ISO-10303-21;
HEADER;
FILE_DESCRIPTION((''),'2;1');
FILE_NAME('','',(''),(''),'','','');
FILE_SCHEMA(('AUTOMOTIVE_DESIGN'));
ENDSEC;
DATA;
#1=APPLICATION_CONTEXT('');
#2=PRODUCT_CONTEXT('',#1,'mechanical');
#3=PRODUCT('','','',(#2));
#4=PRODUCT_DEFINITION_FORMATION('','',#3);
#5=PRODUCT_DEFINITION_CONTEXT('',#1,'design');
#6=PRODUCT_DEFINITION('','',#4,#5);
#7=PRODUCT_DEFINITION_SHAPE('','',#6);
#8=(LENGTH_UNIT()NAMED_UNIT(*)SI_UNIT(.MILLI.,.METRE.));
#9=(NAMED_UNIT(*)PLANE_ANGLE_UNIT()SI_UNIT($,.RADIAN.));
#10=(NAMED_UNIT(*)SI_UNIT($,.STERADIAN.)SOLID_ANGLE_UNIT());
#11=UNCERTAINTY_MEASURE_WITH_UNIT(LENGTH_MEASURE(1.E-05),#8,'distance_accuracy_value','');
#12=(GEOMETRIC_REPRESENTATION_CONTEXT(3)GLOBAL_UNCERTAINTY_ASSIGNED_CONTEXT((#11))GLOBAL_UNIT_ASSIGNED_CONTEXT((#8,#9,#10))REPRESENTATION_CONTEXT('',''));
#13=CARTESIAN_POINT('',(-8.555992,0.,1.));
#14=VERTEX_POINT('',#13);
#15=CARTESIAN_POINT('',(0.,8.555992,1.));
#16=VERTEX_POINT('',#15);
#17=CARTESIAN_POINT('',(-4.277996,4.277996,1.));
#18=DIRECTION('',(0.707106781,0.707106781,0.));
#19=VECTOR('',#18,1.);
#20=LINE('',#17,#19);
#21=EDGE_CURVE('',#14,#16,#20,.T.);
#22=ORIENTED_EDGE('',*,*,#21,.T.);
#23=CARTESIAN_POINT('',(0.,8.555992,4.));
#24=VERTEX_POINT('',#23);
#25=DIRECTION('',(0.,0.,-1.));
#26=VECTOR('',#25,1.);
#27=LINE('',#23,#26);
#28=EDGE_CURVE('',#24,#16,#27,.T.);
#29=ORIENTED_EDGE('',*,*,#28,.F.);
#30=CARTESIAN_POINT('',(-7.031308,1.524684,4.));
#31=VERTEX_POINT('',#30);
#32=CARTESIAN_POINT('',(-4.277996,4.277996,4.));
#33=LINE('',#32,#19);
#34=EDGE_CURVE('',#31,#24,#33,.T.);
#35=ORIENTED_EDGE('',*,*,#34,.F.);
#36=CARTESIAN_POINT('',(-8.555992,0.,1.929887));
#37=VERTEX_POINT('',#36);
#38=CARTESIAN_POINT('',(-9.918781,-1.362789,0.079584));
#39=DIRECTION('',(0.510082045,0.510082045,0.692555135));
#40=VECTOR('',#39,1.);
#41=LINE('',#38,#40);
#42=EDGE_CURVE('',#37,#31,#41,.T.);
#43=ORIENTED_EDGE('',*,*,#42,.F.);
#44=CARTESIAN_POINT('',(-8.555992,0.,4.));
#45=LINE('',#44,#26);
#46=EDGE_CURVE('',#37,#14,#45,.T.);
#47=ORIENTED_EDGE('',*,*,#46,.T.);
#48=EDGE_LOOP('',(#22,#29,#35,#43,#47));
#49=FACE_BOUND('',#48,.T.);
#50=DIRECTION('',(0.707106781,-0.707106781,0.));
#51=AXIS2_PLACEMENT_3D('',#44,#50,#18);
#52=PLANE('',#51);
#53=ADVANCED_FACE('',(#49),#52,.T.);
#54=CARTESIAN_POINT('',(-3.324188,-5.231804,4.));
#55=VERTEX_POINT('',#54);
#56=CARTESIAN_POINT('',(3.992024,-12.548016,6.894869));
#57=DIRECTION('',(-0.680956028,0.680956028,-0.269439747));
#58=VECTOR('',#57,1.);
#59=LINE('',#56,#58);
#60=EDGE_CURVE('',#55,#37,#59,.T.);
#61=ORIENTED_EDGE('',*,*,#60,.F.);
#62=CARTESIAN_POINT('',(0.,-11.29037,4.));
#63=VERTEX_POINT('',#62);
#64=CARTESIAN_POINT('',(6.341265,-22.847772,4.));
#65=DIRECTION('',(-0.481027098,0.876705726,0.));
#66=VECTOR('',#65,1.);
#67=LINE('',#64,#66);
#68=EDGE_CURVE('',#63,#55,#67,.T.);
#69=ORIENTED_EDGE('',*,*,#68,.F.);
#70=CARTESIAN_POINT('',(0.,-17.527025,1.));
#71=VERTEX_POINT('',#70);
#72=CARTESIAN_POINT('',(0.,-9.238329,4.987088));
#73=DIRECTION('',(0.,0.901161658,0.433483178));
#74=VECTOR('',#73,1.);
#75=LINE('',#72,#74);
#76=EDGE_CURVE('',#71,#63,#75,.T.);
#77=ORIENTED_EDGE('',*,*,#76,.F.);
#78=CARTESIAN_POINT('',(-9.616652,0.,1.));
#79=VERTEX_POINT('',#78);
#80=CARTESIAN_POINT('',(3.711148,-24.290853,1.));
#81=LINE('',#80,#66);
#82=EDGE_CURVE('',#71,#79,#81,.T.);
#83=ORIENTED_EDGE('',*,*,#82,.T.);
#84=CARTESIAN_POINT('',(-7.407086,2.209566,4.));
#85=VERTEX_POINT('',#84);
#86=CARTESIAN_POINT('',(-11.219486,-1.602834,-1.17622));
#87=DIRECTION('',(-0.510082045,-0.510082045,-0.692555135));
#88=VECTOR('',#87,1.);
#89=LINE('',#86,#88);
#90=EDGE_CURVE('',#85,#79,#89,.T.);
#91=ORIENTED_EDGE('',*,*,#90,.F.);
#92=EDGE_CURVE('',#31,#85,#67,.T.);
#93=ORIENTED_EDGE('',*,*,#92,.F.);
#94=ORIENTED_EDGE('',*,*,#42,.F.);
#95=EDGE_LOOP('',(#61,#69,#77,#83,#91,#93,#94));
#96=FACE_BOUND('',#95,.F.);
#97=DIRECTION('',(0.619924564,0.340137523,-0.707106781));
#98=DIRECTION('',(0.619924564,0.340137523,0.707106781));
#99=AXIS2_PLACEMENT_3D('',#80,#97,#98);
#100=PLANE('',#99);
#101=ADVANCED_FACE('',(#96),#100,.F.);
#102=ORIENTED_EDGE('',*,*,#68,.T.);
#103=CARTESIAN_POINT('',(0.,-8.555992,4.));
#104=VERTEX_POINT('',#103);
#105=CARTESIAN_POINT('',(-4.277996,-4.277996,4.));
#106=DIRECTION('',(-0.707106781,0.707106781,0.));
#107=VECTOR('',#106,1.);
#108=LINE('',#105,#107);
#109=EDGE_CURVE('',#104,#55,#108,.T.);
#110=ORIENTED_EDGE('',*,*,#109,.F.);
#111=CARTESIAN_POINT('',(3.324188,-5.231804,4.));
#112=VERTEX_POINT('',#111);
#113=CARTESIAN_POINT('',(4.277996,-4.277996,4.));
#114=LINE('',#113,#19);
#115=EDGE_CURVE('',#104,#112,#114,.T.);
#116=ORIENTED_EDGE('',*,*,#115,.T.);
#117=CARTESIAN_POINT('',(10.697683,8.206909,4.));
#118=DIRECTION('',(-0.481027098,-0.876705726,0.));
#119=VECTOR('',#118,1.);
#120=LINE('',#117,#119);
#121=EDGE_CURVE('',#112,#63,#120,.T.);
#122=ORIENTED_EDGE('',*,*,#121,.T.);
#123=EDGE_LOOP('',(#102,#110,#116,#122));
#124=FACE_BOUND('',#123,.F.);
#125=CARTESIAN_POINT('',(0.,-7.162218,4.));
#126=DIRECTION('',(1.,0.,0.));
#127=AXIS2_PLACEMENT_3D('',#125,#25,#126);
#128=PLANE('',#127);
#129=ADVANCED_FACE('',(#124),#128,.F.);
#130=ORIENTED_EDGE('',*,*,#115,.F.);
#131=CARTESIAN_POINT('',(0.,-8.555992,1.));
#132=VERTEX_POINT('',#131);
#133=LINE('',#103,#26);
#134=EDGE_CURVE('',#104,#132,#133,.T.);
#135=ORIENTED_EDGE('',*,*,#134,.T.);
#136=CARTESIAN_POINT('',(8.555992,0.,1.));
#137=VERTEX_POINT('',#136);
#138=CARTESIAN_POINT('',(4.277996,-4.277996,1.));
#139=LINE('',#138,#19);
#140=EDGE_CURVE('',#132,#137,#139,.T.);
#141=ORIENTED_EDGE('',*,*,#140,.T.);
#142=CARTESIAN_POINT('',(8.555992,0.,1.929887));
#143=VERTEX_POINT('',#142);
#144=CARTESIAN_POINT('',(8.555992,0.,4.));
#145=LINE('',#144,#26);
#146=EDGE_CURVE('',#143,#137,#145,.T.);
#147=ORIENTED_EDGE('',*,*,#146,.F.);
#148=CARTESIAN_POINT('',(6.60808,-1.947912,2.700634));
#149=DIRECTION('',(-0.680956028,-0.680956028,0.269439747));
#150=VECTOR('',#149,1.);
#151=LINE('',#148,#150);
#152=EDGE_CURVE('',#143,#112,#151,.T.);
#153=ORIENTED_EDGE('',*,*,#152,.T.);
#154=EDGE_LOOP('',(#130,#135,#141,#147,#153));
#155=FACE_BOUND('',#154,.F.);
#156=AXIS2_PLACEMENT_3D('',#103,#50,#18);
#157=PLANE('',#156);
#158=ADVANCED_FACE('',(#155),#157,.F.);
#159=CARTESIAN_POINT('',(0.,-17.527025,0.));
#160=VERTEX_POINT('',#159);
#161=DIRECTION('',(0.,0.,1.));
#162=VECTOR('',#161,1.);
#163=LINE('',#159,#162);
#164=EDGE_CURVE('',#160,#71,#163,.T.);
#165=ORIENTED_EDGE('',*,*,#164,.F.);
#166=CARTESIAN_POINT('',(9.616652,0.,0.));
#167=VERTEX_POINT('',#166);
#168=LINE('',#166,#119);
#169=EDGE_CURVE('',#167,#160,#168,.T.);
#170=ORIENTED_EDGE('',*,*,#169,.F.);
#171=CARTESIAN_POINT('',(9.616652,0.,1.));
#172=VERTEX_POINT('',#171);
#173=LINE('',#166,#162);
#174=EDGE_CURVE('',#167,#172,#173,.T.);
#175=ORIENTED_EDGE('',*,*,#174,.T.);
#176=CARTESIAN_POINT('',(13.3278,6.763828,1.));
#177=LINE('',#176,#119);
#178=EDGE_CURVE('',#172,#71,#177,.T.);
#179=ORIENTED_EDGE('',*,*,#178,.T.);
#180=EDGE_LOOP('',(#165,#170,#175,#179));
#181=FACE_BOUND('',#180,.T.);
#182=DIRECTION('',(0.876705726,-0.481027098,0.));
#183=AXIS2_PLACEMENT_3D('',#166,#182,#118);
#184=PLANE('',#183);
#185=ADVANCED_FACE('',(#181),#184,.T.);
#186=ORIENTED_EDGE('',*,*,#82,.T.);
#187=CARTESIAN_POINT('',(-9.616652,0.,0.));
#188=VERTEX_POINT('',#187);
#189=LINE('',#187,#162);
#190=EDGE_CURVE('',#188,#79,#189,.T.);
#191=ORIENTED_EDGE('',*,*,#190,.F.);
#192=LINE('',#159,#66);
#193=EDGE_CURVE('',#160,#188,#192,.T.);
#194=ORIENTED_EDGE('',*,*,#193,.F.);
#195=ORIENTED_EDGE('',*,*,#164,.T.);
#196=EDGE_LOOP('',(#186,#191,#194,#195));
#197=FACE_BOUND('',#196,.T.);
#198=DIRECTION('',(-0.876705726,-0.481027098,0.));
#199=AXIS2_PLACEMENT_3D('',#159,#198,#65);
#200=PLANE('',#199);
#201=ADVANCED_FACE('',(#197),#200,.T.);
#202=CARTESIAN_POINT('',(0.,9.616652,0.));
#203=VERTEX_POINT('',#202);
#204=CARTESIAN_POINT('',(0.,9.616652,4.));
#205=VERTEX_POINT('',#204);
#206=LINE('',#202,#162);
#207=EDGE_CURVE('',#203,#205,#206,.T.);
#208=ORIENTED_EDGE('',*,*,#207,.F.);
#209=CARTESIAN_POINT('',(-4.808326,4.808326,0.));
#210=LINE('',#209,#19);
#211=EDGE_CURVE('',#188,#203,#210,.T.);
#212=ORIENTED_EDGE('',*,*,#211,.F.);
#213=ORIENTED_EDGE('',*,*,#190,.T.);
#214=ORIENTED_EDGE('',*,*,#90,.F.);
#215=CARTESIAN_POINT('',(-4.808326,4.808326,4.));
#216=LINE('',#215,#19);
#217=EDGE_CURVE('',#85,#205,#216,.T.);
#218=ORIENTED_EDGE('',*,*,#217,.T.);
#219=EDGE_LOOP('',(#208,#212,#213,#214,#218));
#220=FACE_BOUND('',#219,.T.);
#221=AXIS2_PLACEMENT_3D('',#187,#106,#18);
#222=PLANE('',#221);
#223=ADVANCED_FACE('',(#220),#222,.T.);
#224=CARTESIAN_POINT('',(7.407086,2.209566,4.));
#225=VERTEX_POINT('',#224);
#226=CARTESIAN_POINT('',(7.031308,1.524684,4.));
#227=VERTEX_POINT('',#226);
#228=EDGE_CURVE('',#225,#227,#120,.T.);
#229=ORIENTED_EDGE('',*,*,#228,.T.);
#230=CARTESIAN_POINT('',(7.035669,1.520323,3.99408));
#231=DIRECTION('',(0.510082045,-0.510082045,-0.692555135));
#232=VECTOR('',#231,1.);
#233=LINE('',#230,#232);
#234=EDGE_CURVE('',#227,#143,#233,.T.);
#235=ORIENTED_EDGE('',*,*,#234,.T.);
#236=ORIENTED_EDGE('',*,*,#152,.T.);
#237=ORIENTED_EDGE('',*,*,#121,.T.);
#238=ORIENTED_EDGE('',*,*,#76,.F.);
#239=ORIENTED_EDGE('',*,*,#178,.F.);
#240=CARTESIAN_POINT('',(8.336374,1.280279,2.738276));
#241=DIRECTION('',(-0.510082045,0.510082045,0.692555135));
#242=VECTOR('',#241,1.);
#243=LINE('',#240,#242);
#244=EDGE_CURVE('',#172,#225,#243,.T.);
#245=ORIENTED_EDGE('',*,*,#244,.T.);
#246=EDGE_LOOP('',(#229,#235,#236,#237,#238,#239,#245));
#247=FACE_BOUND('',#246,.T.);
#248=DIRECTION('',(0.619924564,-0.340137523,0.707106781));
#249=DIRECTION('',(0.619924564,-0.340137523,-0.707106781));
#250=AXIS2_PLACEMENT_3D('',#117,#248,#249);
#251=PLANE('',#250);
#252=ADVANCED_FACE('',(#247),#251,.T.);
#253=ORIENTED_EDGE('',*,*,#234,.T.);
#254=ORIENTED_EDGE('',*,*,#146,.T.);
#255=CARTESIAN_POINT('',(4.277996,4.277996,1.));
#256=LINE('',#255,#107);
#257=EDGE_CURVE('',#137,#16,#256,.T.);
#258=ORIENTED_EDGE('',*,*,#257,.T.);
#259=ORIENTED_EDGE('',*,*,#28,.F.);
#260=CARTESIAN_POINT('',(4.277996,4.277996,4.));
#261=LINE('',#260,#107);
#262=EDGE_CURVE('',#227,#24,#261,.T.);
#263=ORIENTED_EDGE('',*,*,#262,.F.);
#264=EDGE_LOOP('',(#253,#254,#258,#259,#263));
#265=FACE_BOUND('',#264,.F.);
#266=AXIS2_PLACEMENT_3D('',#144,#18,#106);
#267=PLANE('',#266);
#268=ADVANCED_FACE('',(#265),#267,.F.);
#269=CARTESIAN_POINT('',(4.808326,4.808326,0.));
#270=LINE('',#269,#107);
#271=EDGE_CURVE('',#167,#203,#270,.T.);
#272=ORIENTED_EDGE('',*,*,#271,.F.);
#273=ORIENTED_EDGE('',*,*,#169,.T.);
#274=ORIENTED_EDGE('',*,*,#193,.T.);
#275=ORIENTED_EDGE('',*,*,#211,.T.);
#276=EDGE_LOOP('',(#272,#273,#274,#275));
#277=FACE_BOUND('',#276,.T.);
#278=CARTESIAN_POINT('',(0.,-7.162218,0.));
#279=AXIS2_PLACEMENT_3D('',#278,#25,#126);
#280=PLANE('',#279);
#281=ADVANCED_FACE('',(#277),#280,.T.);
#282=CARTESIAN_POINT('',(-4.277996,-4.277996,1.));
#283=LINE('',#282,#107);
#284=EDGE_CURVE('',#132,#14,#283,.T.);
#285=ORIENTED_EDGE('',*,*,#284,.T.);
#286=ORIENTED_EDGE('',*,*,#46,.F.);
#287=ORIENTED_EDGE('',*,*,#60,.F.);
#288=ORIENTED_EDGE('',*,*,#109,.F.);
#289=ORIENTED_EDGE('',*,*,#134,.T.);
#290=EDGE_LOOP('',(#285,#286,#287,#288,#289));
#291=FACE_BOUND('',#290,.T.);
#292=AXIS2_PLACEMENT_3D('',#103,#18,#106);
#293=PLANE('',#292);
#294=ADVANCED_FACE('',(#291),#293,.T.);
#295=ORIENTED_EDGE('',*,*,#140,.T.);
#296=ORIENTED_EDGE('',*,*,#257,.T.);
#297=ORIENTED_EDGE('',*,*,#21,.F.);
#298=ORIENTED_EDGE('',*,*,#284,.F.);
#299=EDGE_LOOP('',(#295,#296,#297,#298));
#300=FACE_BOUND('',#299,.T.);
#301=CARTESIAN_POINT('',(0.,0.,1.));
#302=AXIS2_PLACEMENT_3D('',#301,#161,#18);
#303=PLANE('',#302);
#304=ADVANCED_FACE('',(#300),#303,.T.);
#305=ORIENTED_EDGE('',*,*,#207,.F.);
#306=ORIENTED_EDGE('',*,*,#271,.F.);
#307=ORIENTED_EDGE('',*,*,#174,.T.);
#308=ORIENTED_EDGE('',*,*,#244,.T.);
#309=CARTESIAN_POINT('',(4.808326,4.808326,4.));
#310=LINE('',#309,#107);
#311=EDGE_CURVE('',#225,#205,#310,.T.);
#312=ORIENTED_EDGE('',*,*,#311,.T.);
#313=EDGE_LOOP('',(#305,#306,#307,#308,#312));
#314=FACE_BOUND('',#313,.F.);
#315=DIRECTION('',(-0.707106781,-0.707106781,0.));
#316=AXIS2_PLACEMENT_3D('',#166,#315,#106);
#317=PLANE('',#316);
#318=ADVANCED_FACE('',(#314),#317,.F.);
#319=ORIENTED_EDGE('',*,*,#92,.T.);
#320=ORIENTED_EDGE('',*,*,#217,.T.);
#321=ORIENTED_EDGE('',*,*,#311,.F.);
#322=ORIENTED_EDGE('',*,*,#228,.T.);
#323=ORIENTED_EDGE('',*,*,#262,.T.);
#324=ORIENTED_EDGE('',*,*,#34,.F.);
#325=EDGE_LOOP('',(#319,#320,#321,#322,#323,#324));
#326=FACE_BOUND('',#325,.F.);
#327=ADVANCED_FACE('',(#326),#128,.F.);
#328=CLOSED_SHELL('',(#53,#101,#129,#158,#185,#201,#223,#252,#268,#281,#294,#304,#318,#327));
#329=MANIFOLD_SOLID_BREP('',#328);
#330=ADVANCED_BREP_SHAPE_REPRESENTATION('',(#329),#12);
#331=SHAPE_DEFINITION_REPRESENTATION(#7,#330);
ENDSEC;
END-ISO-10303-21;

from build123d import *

# Parameters (mm, degrees)
F0_W        = 13.6
F0_H        = 13.6
F1_DEPTH    = 4
F2_W        = 12.1
F2_H        = 12.1
F3_DEPTH    = 3
F5_ANGLE    = 45
F7_DEPTH    = 4
F8_T1_DEPTH = 35.422011596
F8_T3_DEPTH = 35.422011596


# Not quite as in the source:
# - a fillet or chamfer that OpenCascade refuses, or shapes differently, is made with other operations: its cross-section is extruded or revolved along the edge and cut away or added


with BuildPart() as f1:
    # F0 (on Top) → F1 (new body)
    with BuildSketch(Plane.XY):
        Rectangle(F0_W, F0_H)
    extrude(amount=F1_DEPTH)

    # F2 (on face) → F3 (cut)
    with BuildSketch(Plane.XY.offset(4)):
        Rectangle(F2_W, F2_H)
    extrude(amount=-F3_DEPTH, mode=Mode.SUBTRACT)


with BuildPart() as f1_1:
    # F5: moved
    add(f1.part.rotate(Axis((0, 0, 16.5512096137), (0, 0, 1)), F5_ANGLE))

    # F6 (on face) → F7 (join)
    with BuildSketch(Plane(origin=(0, 0, 0), x_dir=(1, 0, 0), z_dir=(0, 0, -1))):
        Polygon((0, 9.6166522241), (9.6166522241, 0), (0, 17.527025193), (-9.6166522241, 0), align=None)
    extrude(amount=-F7_DEPTH)

    # F8: chamfer of 3 on 2 edges, made by hand

    # F8_s2 → F8_t1 (cut)
    with BuildSketch(Plane(origin=(5.9363165934, 10.8193546008, 0), x_dir=(0, 0, 1), z_dir=(-0.4810270984, -0.8767057263, 0))):
        Polygon((4, -5.4309740729), (1, -8.4309740729), (4, -8.4309740729), align=None)
    extrude(amount=F8_T1_DEPTH, mode=Mode.SUBTRACT)

    # F8_s4 → F8_t3 (cut)
    with BuildSketch(Plane(origin=(11.1026308657, -20.2353258031, 0), x_dir=(0, 0, 1), z_dir=(-0.4810270984, 0.8767057263, 0))):
        Polygon((1, -8.4309740729), (4, -5.4309740729), (4, -8.4309740729), align=None)
    extrude(amount=F8_T3_DEPTH, mode=Mode.SUBTRACT)


solid = f1_1.part
